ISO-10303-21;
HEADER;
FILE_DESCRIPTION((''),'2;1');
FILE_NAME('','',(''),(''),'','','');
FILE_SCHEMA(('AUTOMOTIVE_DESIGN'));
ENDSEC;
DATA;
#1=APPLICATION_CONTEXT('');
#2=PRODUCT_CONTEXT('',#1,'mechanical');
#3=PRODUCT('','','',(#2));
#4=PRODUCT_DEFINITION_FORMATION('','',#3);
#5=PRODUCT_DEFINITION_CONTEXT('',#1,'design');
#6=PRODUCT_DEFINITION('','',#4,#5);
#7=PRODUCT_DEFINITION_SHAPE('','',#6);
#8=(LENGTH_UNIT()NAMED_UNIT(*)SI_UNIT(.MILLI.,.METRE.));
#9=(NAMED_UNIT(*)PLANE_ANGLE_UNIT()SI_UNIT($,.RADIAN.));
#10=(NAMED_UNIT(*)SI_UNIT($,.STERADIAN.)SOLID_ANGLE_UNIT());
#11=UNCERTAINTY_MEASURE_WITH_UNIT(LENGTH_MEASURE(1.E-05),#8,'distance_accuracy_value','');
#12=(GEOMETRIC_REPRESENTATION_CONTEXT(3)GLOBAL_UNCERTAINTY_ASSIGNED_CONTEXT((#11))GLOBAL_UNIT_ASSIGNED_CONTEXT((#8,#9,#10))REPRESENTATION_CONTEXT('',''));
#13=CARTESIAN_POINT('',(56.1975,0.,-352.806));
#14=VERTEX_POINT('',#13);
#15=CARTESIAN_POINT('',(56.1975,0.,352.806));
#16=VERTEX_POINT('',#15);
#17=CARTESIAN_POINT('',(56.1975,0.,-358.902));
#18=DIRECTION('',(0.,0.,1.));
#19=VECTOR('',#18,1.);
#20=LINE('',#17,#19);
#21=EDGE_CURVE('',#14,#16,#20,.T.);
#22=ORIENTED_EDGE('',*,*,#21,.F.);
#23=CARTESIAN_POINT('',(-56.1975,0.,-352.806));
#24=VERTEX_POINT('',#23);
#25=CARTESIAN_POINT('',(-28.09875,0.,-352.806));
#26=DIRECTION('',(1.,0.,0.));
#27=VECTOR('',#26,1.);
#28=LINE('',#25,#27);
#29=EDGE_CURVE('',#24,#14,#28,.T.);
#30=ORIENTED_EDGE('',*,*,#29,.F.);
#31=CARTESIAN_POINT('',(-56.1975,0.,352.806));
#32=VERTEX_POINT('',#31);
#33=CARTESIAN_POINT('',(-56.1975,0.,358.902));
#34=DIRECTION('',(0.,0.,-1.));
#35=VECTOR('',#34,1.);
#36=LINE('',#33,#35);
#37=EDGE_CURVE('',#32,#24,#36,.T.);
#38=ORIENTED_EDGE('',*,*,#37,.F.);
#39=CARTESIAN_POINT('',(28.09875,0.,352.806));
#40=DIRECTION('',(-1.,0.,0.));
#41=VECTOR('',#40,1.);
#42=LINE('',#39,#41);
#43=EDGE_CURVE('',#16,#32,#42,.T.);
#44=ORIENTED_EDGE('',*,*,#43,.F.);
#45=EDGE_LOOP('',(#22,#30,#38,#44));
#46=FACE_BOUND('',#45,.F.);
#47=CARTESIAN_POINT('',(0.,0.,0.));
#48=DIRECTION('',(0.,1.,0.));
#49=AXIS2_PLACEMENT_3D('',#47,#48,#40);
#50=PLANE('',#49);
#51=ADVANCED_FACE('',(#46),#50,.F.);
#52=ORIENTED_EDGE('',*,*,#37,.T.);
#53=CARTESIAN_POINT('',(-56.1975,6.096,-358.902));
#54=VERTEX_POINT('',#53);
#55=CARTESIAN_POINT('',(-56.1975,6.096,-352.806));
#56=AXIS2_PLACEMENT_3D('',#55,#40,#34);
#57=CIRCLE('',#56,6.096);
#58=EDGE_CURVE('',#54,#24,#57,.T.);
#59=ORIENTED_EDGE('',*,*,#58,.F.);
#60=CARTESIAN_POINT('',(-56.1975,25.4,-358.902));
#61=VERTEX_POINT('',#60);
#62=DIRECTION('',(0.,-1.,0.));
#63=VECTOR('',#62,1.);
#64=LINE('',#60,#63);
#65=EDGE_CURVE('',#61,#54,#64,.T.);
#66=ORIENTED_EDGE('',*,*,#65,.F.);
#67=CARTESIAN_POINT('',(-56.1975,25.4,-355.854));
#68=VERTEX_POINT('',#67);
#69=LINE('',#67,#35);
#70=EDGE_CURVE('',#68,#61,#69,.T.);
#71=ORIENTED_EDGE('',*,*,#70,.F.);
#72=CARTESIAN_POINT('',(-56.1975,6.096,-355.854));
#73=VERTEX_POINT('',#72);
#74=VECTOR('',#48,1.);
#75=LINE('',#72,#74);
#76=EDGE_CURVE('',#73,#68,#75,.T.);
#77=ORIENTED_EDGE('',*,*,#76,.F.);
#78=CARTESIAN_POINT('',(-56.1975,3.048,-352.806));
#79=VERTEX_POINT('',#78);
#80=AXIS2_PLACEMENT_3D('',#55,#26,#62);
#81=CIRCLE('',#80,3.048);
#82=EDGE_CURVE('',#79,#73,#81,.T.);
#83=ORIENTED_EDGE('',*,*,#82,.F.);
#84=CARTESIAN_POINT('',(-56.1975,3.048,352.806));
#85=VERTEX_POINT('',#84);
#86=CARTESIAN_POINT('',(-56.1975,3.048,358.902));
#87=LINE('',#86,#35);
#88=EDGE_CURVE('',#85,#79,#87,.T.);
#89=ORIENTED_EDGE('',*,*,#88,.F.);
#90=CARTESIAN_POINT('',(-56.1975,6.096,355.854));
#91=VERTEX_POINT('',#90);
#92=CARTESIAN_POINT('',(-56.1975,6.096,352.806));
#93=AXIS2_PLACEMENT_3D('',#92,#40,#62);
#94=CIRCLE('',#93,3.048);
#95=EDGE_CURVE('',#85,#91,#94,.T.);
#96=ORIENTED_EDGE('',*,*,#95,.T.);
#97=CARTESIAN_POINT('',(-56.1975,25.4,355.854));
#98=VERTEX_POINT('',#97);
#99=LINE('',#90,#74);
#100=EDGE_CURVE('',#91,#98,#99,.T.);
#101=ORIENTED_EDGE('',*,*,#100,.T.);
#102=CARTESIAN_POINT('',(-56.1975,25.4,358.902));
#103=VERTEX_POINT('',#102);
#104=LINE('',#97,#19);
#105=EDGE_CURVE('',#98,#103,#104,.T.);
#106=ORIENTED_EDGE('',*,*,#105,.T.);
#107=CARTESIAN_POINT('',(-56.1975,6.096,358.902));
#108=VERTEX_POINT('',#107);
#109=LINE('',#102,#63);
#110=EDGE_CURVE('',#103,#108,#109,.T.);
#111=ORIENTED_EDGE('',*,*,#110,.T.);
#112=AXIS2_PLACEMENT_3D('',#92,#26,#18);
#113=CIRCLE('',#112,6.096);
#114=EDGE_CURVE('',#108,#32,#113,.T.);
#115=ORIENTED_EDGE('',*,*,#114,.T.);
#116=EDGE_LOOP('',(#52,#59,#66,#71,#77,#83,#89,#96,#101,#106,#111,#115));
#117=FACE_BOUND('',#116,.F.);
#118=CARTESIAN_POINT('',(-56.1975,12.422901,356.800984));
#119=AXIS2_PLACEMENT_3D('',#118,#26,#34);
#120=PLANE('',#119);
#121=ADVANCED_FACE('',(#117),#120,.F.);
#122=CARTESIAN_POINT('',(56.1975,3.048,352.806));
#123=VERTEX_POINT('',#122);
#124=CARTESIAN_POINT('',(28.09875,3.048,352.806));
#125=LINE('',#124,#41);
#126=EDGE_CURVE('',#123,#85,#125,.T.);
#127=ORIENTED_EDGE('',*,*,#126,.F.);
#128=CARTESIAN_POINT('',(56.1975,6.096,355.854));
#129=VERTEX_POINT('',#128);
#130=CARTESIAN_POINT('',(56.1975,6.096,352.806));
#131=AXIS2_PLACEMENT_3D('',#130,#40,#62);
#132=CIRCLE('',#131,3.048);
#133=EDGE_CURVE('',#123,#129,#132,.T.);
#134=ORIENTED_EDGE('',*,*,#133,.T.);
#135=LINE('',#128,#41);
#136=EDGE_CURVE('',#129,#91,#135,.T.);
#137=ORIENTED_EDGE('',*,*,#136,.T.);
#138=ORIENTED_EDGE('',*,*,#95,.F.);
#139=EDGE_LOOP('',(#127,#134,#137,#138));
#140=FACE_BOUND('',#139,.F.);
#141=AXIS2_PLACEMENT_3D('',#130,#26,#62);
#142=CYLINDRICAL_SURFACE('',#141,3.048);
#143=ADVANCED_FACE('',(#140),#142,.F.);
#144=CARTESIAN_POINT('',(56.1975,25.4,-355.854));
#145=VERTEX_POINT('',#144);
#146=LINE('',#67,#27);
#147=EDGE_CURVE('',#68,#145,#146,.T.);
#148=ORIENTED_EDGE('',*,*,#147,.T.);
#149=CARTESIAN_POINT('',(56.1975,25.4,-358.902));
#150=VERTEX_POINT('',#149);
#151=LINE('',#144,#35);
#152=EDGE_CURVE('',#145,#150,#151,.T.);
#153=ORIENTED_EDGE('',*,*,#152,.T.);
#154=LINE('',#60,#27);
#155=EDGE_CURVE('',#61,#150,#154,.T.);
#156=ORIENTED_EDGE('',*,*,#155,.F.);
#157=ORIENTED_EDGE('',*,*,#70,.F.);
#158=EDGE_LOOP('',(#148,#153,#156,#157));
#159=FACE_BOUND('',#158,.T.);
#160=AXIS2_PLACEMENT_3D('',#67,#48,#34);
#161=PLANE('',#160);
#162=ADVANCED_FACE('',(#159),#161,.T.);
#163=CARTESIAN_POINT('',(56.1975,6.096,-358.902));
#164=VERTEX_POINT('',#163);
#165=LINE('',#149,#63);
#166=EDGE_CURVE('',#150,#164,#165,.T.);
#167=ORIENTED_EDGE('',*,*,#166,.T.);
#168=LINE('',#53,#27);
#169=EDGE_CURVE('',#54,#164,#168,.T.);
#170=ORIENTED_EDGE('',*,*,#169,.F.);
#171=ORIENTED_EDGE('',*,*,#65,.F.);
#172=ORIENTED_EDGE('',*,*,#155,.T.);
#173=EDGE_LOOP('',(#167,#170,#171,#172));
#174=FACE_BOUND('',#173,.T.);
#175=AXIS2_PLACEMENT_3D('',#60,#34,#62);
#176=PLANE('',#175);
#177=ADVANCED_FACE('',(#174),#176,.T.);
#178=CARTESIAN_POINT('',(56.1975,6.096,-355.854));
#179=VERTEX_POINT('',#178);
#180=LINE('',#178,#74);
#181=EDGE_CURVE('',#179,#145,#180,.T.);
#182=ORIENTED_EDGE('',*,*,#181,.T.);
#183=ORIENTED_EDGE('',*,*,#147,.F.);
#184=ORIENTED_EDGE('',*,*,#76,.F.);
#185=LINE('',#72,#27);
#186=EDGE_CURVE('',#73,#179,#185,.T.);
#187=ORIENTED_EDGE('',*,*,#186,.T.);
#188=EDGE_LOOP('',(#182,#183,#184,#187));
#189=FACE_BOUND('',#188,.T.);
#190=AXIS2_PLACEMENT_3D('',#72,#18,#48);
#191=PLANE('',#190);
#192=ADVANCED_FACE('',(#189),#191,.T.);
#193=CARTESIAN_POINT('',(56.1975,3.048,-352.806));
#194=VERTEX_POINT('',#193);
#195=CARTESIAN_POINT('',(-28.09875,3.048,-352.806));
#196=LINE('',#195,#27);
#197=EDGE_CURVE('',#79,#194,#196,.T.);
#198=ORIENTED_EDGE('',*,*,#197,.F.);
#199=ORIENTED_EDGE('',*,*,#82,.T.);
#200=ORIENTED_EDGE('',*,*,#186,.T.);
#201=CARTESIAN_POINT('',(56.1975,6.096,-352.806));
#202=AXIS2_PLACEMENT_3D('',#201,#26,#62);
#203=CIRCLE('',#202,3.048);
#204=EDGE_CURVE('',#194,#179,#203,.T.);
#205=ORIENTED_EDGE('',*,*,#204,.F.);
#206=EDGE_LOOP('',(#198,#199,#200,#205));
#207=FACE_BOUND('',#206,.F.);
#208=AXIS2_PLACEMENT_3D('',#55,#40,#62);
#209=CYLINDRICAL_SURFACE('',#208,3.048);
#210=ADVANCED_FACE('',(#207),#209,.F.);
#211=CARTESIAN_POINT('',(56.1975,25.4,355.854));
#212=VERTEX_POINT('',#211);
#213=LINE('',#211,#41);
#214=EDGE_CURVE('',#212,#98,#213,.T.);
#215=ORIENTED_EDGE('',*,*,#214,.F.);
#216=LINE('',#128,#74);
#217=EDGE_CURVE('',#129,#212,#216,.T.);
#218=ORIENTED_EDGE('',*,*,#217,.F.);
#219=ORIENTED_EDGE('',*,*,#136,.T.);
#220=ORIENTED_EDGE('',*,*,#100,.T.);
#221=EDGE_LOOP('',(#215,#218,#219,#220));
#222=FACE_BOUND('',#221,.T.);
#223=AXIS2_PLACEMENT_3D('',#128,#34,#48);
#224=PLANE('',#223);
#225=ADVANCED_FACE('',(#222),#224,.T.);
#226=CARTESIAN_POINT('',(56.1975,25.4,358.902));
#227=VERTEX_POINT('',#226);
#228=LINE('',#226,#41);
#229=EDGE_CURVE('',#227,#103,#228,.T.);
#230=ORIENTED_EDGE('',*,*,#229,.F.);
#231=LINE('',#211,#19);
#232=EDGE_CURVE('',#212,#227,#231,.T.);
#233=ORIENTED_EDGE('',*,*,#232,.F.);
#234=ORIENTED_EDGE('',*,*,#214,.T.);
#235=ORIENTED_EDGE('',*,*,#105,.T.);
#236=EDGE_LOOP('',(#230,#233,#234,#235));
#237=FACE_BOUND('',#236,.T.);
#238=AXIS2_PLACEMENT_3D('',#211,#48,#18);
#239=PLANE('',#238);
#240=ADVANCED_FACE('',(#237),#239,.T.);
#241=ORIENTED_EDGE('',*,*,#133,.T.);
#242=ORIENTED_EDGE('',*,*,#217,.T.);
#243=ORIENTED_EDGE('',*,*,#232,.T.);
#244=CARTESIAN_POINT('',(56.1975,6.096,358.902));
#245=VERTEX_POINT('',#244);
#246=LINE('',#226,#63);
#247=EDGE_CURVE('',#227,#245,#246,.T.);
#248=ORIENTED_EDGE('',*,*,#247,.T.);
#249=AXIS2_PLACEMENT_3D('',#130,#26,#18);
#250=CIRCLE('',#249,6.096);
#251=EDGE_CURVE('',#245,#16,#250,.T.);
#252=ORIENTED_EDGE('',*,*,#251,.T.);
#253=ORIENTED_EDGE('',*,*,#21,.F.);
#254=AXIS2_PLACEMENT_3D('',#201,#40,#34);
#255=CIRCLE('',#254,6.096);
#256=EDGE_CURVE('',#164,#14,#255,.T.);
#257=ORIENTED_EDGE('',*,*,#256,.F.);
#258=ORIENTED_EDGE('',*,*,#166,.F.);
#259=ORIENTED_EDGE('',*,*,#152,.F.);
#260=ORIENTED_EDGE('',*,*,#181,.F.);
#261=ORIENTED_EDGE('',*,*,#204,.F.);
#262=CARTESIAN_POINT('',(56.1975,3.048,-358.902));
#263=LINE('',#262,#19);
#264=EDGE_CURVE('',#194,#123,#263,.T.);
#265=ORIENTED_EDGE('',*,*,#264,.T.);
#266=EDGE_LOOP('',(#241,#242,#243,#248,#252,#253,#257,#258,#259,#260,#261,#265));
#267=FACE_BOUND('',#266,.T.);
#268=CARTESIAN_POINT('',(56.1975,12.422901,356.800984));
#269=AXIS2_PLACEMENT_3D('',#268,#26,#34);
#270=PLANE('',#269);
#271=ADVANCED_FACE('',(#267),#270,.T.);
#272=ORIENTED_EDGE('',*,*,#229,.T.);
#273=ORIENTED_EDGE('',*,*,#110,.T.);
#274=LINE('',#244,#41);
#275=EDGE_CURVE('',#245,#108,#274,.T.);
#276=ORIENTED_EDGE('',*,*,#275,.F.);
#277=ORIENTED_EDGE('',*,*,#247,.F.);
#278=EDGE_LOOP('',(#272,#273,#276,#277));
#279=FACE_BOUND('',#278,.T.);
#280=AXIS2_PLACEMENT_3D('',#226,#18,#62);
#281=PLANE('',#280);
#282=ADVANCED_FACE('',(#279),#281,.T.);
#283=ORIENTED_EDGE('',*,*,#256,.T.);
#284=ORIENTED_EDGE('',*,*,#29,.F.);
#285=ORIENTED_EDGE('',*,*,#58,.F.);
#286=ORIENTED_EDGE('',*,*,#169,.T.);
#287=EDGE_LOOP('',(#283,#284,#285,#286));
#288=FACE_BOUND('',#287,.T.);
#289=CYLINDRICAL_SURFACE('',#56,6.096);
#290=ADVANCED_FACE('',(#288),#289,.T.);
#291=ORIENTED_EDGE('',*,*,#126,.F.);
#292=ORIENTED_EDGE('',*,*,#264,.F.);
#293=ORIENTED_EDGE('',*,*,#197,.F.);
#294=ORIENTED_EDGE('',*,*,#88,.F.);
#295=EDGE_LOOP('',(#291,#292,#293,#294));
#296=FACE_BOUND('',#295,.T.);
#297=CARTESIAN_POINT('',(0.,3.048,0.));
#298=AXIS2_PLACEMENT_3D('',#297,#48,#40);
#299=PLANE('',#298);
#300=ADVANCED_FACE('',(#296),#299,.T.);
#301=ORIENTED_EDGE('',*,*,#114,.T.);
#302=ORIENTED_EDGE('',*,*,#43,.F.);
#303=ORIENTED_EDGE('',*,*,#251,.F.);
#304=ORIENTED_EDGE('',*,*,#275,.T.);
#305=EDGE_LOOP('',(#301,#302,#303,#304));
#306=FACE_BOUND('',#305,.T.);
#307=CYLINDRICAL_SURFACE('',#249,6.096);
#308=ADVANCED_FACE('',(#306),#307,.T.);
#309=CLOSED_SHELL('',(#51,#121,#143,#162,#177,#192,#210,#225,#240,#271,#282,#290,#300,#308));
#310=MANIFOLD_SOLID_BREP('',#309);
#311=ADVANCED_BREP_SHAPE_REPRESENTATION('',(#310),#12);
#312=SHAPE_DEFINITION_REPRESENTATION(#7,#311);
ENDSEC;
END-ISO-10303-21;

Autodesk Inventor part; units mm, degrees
ref_plane "YZ Plane" through (0, 0, 0) normal (1, 0, 0) x (0, 1, 0)
ref_plane "XZ Plane" through (0, 0, 0) normal (0, 1, 0) x (-1, 0, 0)
ref_plane "XY Plane" through (0, 0, 0) normal (0, 0, 1) x (1, 0, 0)
sketch "Sketch1" plane through (0, 0, 0) normal (0, 1, 0) x (-1, 0, 0)
  line L0 (-56.1975, 358.902) -> (56.1975, 358.902)
  line L1 (56.1975, 358.902) -> (56.1975, -358.902)
  line L2 (56.1975, -358.902) -> (-56.1975, -358.902)
  line L3 (-56.1975, -358.902) -> (-56.1975, 358.902)
  line L4 (-56.1975, 358.902) -> (56.1975, -358.902) construction
  line L5 (56.1975, 358.902) -> (-56.1975, -358.902) construction
  point P0 (0, 0)
  dimension "d0" = 112.395
  dimension "d1" = 717.804
extrude "Plate1" add sketch "Sketch1" along normal blind 3.048
sketch "Sketch2" plane through (56.1975, 0, 355.854) normal (0, 0, 1) x (1, 0, 0)
  line L0 (-112.395, 0) -> (0, 0)
  line L1 (0, 0) -> (0, 25.4)
  line L2 (0, 25.4) -> (-112.395, 25.4)
  line L3 (-112.395, 25.4) -> (-112.395, 0)
edge flange "Flange1" height 25.4 angle 90 thickness 3.048 bend radius 3.048 thickness toward (0, 0, 1) relief straight relief width 3.048 relief depth 1.524 corner gap 3.048 corner form 0 edges at (0, 3.048, 358.902) (0, 3.048, -358.902) wall of the first edge with corners at (-56.1975, 0, 355.854) (56.1975, 0, 355.854) (56.1975, 25.4, 355.854) (-56.1975, 25.4, 355.854)
bend "Bend1"
corner "Corner1"
equation "\"d5\" = BendReliefWidth"
equation "\"d6\" = BendReliefDepth"
equation "\"d7\" = MinimumRemnant"
equation "\"d8\" = BendRadius"
equation "\"d11\" = BendRadius"
equation "\"d12\" = CornerReliefSize"
equation "\"d13\" = GapSize"
equation "\"d14\" = JacobiRadiusSize"
equation "\"BendRadius\" = Thickness"
equation "\"BendReliefWidth\" = Thickness"
equation "\"BendReliefDepth\" = 0.5 * Thickness"
equation "\"CornerReliefSize\" = 4 * Thickness"
equation "\"MinimumRemnant\" = 2 * Thickness"
equation "\"TransitionRadius\" = BendRadius"
equation "\"JacobiRadiusSize\" = Thickness"
equation "\"GapSize\" = Thickness"
equation "\"d4\" = BendRadius"
equation "\"Thickness\" = 3.048"
properties part number "Side Gurad"
